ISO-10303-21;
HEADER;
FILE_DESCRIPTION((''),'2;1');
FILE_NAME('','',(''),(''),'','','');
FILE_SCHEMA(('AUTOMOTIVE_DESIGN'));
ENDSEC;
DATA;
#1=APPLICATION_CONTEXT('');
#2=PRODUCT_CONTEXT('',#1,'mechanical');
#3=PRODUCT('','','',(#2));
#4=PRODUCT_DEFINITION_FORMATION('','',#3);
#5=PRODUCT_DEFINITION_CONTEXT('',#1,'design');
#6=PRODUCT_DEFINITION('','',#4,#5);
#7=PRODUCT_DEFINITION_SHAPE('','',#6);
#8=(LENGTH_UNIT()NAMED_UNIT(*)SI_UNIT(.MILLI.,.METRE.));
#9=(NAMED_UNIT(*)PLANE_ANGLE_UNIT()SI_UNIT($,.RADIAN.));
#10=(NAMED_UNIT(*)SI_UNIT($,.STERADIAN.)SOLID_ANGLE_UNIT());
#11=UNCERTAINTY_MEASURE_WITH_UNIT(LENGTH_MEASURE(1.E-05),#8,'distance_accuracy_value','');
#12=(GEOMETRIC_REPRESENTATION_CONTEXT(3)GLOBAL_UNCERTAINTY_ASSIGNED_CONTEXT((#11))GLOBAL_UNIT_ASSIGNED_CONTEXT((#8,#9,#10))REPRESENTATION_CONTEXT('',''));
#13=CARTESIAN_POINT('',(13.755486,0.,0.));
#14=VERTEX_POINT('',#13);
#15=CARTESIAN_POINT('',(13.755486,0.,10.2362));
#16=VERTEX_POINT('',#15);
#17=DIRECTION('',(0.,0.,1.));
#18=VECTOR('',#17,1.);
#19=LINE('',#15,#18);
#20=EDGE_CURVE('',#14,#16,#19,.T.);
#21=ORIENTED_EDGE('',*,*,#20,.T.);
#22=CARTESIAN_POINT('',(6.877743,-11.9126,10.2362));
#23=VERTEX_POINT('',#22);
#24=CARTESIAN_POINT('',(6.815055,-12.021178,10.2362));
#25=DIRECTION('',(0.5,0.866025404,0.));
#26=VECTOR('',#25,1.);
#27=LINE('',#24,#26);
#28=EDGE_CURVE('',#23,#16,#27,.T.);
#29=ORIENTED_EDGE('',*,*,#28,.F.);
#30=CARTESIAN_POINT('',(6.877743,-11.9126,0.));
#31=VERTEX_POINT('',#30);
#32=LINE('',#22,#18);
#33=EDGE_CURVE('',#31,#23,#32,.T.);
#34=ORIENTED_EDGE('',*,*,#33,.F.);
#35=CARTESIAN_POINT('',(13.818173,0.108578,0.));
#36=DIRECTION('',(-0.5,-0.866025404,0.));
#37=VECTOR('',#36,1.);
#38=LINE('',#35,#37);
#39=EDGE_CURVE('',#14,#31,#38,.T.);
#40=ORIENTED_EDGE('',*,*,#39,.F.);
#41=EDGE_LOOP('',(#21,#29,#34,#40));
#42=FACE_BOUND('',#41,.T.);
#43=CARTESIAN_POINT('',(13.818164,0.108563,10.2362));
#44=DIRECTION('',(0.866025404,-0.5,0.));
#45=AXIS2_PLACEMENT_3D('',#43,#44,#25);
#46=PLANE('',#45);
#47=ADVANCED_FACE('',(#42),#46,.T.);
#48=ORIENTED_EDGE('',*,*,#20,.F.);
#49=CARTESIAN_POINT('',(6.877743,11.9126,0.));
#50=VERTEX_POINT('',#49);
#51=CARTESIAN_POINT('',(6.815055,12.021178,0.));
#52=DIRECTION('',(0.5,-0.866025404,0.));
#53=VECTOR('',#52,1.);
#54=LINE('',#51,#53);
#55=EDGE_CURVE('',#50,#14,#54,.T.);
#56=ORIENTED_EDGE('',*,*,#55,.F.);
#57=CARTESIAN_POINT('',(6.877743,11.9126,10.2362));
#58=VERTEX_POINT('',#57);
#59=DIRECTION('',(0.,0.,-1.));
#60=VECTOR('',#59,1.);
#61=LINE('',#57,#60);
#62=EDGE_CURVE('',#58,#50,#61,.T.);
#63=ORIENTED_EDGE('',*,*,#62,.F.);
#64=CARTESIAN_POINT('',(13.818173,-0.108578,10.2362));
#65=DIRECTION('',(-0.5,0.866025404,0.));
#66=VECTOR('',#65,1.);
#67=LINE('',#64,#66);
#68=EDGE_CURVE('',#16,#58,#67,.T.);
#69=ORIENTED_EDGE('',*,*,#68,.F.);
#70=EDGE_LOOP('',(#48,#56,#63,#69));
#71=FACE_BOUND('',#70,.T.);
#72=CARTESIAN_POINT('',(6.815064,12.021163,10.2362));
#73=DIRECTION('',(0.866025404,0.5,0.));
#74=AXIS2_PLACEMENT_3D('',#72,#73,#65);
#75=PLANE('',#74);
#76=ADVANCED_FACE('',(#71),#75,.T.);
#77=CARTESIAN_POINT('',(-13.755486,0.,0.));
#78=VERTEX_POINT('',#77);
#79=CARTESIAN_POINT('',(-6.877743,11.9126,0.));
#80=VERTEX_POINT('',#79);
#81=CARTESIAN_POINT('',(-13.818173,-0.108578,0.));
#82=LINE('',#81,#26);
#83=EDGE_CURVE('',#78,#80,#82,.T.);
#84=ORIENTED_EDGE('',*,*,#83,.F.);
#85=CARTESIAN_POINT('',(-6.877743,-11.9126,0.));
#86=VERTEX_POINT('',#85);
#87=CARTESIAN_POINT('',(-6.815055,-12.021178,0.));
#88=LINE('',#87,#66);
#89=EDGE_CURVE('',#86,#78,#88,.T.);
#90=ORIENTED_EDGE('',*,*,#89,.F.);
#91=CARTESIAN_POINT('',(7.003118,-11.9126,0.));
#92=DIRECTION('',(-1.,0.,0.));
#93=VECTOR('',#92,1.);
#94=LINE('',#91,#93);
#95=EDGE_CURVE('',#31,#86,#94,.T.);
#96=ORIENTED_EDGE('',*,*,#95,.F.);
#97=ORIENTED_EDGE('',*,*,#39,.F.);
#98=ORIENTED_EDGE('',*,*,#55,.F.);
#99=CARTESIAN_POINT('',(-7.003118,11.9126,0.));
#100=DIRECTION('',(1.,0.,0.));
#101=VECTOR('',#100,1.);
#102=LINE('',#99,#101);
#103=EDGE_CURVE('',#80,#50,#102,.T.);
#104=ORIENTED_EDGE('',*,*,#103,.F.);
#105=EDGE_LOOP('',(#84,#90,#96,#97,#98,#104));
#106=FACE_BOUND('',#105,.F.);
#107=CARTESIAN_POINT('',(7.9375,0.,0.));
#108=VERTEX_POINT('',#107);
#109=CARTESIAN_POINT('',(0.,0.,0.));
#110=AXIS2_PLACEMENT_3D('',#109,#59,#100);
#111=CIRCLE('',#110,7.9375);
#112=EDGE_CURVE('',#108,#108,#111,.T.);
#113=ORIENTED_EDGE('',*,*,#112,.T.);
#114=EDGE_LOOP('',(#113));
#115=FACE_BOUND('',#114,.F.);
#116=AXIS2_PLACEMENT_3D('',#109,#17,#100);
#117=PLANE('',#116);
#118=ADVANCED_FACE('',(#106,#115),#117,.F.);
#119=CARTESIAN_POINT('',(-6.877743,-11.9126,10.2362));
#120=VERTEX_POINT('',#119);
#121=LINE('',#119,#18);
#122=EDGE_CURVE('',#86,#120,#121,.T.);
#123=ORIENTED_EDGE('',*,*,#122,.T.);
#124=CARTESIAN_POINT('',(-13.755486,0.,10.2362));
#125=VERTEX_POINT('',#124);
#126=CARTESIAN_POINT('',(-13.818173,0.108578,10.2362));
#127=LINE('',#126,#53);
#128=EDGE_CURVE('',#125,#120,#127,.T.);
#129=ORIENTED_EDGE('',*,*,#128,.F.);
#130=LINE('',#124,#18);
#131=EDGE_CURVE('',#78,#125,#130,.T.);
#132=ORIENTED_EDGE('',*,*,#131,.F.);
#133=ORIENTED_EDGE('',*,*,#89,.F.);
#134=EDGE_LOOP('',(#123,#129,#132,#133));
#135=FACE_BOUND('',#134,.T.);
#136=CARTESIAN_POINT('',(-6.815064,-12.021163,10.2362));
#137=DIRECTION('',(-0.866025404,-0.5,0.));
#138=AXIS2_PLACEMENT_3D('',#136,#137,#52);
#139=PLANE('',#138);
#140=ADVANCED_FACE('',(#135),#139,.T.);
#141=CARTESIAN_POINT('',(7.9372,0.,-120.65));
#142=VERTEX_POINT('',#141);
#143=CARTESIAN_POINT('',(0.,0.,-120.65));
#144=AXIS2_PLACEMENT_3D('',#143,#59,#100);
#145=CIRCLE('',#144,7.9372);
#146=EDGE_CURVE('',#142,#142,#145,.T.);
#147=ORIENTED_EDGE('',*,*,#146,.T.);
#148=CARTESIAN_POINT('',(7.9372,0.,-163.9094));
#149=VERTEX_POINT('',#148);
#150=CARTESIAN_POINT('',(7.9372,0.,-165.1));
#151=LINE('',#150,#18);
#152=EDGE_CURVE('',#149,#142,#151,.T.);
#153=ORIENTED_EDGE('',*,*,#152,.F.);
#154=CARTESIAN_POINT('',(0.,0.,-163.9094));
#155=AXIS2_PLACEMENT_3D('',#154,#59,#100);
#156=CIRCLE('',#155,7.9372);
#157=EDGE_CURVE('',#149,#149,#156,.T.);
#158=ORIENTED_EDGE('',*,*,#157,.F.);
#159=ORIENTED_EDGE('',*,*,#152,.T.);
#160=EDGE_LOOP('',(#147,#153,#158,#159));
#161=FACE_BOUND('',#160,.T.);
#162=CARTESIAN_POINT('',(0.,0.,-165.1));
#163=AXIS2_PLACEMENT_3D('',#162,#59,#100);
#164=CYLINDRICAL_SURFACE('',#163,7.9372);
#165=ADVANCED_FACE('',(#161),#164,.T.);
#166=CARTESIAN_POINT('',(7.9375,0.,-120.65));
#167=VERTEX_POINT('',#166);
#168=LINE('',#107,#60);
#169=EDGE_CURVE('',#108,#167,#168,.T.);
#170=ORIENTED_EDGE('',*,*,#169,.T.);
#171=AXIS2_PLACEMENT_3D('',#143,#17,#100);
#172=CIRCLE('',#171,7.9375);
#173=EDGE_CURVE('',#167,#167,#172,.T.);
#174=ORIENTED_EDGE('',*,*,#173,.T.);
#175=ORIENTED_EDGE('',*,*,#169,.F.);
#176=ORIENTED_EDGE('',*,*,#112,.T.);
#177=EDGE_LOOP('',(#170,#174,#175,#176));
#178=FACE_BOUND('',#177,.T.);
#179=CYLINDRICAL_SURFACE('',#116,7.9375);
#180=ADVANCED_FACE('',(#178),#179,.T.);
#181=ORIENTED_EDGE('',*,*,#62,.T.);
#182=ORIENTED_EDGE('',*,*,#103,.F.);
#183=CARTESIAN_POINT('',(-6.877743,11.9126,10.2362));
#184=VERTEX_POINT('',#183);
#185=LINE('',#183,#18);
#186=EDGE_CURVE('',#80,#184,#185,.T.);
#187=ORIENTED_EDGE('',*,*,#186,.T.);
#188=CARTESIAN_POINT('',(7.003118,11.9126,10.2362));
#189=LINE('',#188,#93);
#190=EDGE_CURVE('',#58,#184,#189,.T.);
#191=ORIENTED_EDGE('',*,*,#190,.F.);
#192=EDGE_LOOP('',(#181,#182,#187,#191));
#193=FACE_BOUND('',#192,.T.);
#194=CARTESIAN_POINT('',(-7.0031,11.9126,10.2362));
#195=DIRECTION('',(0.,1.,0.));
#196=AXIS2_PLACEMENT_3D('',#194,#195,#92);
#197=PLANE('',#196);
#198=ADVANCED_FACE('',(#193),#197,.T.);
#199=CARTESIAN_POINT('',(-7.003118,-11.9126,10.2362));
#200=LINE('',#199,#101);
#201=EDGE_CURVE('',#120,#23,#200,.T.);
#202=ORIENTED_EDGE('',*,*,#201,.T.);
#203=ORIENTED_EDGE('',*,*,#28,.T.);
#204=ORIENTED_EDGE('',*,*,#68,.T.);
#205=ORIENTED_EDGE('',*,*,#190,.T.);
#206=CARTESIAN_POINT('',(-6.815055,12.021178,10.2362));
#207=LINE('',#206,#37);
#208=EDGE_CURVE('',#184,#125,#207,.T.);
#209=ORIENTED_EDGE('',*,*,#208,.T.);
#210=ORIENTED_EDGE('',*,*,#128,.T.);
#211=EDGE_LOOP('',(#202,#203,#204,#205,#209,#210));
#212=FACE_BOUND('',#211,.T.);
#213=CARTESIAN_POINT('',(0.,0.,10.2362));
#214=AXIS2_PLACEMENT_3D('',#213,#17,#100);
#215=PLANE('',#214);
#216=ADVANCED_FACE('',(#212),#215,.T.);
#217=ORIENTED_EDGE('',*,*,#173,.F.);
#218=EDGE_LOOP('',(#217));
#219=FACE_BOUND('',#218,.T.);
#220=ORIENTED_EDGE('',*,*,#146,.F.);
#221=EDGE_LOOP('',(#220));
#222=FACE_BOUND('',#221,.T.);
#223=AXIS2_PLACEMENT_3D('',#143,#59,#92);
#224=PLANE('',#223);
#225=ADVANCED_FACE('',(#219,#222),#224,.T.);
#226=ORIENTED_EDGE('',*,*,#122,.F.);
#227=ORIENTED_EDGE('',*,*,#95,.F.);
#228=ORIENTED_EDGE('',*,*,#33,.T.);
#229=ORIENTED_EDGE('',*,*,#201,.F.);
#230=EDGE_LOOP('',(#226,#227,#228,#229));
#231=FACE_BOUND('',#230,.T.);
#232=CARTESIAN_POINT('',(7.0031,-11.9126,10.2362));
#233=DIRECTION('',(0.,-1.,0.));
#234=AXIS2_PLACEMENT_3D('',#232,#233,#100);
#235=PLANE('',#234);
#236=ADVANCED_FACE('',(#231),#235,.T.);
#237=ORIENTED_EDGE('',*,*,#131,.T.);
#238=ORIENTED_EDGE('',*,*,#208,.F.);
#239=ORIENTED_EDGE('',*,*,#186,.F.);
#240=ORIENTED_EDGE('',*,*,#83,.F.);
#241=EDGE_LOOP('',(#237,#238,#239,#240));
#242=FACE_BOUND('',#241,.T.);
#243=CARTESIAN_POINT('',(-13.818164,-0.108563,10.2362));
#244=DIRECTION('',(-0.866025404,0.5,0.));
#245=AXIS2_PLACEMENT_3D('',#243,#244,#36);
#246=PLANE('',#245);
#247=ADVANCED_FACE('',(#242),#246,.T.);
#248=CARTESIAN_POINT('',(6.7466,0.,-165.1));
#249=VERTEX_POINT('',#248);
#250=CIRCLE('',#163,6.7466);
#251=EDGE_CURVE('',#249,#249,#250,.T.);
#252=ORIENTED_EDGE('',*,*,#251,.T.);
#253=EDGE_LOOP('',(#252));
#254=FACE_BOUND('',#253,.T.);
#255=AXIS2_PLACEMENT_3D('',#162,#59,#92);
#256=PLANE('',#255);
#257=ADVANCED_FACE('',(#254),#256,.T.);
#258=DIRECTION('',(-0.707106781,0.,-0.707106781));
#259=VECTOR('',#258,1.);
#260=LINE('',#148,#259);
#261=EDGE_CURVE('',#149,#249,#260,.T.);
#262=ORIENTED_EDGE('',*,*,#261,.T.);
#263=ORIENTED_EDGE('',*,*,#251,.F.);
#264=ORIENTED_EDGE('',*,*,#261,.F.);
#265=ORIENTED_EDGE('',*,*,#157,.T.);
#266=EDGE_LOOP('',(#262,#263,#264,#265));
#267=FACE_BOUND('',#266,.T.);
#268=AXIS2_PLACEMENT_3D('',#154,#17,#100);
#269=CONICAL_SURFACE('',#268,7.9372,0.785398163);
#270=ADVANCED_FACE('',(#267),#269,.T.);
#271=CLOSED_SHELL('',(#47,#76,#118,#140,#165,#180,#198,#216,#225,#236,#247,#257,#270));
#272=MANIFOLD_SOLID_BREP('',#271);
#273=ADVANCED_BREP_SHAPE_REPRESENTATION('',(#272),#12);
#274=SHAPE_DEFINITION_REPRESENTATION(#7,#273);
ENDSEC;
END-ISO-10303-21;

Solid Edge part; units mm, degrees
sketch "Sketch1" plane through (0, 0, 0) normal (0, 0, 1) x (1, 0, 0)
  circle A0 centre (0, 0) radius 13.8186
  dimension "D1" = 27.6372
extrude "Protrusion1" add sketch "Sketch1" along normal blind 10.2362
sketch "Sketch2" plane through (0, 0, 0) normal (0, 0, -1) x (1, 0, 0)
  circle A0 centre (0, 0) radius 7.9375
extrude "Protrusion2" add sketch "Sketch2" along normal blind 165.1
sketch "Sketch3" plane through (0, 0, -165.1) normal (0, 0, -1) x (1, 0, 0)
  circle A0 centre (0, 0) radius 7.9372
extrude "Cutout1" cut sketch "Sketch3" against normal blind 44.45 flip side to cut
chamfer "Chamfer_1" distance 1.1906 angle 45 1 edges at (-7.9372, 0, -165.1)
sketch "Sketch4" plane through (0, 0, 10.2362) normal (0, 0, 1) x (1, 0, 0)
  line L0 (-7.0031, 11.9126) -> (7.0031, 11.9126)
  dimension "D1" = 23.8252
extrude "Cutout2" cut sketch "Sketch4" against normal up to next material side at (0, 11.9626, 10.2362)
pattern_circular "Pattern1" count 6 over 360 about axis through (0, 0, 10.2362) along (0, 0, 1) of "Cutout2"
properties part number "24100349"
